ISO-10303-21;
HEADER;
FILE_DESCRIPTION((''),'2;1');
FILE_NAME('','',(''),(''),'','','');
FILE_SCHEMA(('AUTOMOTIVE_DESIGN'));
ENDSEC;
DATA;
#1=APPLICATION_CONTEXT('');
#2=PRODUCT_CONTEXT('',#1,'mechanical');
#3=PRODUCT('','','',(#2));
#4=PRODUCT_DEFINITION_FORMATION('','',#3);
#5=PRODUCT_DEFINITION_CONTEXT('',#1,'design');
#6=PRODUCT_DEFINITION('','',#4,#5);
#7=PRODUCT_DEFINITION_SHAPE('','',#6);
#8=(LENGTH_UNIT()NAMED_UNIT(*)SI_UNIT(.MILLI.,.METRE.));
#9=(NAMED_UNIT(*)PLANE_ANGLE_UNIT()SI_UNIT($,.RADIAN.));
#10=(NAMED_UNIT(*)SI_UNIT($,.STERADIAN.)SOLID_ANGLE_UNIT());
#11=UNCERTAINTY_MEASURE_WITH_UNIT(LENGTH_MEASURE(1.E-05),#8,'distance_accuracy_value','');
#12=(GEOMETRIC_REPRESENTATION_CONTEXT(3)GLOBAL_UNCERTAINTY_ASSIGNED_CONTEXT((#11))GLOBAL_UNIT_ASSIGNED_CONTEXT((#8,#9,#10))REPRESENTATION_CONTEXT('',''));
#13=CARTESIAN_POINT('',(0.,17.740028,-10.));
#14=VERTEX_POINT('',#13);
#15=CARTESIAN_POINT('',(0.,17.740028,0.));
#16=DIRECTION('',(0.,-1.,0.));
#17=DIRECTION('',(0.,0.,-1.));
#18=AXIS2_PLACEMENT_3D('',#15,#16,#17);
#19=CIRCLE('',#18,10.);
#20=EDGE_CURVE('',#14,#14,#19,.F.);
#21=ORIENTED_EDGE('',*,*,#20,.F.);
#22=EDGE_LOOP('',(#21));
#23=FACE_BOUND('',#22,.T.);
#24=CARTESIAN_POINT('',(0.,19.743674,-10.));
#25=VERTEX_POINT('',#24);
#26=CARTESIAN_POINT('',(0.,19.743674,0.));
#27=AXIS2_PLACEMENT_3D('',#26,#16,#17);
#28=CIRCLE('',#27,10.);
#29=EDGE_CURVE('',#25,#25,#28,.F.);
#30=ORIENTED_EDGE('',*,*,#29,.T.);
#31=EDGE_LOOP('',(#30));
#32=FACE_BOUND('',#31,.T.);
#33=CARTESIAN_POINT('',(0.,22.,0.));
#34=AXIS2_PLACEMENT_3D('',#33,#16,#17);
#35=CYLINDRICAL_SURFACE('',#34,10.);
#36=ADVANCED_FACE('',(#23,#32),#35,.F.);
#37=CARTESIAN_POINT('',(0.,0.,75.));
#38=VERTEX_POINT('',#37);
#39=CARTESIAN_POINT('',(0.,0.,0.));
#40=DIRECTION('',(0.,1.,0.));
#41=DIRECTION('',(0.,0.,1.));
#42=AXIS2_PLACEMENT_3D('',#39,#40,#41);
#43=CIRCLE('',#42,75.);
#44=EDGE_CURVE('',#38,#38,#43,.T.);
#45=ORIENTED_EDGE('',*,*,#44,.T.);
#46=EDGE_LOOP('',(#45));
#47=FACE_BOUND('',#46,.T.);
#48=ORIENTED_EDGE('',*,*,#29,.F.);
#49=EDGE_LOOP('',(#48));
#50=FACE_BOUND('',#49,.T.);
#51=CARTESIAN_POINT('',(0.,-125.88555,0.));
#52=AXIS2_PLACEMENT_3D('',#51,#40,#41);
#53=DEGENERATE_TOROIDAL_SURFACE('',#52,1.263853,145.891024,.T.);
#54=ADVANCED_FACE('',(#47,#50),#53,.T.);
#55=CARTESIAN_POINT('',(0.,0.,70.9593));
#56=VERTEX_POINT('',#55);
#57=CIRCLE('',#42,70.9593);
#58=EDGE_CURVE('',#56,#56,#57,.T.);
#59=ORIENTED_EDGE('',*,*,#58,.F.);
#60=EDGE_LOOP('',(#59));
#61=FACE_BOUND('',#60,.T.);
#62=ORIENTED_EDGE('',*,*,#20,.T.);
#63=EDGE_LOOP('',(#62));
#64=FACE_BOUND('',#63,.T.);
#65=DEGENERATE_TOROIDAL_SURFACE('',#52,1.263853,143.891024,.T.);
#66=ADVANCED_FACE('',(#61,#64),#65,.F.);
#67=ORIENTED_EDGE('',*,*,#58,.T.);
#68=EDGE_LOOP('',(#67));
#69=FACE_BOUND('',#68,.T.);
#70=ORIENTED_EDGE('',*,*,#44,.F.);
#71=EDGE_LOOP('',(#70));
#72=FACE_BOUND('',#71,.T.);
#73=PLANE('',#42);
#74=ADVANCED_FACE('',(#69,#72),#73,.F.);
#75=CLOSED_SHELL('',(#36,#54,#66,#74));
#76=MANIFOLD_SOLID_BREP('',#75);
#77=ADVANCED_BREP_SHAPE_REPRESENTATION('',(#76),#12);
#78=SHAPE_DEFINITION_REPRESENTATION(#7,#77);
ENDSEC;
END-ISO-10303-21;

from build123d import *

# Parameters (mm, degrees)
SKETCH4_R          = 10
CUT_EXTRUDE1_DEPTH = 22


# Read off the part's stored shape, not the designer's step: Shell4
with BuildPart() as part:
    # Sketch2 → Revolve3 (revolve)
    with BuildSketch(Plane.XY):
        with BuildLine():
            ThreePointArc((-75, 0), (-38.854521396, 15.079455235), (0, 20))
            Line((0, 20), (0, 0))
            Line((0, 0), (-75, 0))
        make_face()
    revolve(axis=Axis((0, 20, 0), (0, -1, 0)))

    # Shell4 outline → Shell4 (revolve, cut)
    with BuildSketch(Plane.XY):
        with BuildLine():
            Line((0, 0), (70.959299581, 0))
            add(Edge.make_bspline(
                [(70.959299581, 0), (58.371091625, 6.969352493), (44.697655968, 12.48291706), (30.310219449, 16.202186231), (15.668630532, 18.005474405), (1.010939764, 18.005474483), (0.758094755, 18.004918806), (0.505321529, 18.00380806), (0.252622481, 18.002142877), (0, 17.999923905)],
                knots=[1.06516175, 1.06516175, 1.06516175, 1.06516175, 1.06516175, 1.06516175, 1.570703705, 1.570703705, 1.570703705, 1.570703705, 1.579579846, 1.579579846, 1.579579846, 1.579579846, 1.579579846, 1.579579846], degree=5, weights=[1, 1, 0.999596269, 0.999595367, 1, 1, 1, 1, 1, 1]))
            Line((0, 17.999923905), (0, 0))
        make_face()
    revolve(axis=Axis((0, 0, 0), (0, 1, 0)), mode=Mode.SUBTRACT)

    # Sketch4 → Cut-Extrude1 (cut)
    with BuildSketch(Plane(origin=(0, 0, 0), x_dir=(1, 0, 0), z_dir=(0, 1, 0))):
        with Locations(Location((0, 0, 0), (0, 0, 90))):
            Circle(SKETCH4_R)
    extrude(amount=CUT_EXTRUDE1_DEPTH, mode=Mode.SUBTRACT)


solid = part.part
